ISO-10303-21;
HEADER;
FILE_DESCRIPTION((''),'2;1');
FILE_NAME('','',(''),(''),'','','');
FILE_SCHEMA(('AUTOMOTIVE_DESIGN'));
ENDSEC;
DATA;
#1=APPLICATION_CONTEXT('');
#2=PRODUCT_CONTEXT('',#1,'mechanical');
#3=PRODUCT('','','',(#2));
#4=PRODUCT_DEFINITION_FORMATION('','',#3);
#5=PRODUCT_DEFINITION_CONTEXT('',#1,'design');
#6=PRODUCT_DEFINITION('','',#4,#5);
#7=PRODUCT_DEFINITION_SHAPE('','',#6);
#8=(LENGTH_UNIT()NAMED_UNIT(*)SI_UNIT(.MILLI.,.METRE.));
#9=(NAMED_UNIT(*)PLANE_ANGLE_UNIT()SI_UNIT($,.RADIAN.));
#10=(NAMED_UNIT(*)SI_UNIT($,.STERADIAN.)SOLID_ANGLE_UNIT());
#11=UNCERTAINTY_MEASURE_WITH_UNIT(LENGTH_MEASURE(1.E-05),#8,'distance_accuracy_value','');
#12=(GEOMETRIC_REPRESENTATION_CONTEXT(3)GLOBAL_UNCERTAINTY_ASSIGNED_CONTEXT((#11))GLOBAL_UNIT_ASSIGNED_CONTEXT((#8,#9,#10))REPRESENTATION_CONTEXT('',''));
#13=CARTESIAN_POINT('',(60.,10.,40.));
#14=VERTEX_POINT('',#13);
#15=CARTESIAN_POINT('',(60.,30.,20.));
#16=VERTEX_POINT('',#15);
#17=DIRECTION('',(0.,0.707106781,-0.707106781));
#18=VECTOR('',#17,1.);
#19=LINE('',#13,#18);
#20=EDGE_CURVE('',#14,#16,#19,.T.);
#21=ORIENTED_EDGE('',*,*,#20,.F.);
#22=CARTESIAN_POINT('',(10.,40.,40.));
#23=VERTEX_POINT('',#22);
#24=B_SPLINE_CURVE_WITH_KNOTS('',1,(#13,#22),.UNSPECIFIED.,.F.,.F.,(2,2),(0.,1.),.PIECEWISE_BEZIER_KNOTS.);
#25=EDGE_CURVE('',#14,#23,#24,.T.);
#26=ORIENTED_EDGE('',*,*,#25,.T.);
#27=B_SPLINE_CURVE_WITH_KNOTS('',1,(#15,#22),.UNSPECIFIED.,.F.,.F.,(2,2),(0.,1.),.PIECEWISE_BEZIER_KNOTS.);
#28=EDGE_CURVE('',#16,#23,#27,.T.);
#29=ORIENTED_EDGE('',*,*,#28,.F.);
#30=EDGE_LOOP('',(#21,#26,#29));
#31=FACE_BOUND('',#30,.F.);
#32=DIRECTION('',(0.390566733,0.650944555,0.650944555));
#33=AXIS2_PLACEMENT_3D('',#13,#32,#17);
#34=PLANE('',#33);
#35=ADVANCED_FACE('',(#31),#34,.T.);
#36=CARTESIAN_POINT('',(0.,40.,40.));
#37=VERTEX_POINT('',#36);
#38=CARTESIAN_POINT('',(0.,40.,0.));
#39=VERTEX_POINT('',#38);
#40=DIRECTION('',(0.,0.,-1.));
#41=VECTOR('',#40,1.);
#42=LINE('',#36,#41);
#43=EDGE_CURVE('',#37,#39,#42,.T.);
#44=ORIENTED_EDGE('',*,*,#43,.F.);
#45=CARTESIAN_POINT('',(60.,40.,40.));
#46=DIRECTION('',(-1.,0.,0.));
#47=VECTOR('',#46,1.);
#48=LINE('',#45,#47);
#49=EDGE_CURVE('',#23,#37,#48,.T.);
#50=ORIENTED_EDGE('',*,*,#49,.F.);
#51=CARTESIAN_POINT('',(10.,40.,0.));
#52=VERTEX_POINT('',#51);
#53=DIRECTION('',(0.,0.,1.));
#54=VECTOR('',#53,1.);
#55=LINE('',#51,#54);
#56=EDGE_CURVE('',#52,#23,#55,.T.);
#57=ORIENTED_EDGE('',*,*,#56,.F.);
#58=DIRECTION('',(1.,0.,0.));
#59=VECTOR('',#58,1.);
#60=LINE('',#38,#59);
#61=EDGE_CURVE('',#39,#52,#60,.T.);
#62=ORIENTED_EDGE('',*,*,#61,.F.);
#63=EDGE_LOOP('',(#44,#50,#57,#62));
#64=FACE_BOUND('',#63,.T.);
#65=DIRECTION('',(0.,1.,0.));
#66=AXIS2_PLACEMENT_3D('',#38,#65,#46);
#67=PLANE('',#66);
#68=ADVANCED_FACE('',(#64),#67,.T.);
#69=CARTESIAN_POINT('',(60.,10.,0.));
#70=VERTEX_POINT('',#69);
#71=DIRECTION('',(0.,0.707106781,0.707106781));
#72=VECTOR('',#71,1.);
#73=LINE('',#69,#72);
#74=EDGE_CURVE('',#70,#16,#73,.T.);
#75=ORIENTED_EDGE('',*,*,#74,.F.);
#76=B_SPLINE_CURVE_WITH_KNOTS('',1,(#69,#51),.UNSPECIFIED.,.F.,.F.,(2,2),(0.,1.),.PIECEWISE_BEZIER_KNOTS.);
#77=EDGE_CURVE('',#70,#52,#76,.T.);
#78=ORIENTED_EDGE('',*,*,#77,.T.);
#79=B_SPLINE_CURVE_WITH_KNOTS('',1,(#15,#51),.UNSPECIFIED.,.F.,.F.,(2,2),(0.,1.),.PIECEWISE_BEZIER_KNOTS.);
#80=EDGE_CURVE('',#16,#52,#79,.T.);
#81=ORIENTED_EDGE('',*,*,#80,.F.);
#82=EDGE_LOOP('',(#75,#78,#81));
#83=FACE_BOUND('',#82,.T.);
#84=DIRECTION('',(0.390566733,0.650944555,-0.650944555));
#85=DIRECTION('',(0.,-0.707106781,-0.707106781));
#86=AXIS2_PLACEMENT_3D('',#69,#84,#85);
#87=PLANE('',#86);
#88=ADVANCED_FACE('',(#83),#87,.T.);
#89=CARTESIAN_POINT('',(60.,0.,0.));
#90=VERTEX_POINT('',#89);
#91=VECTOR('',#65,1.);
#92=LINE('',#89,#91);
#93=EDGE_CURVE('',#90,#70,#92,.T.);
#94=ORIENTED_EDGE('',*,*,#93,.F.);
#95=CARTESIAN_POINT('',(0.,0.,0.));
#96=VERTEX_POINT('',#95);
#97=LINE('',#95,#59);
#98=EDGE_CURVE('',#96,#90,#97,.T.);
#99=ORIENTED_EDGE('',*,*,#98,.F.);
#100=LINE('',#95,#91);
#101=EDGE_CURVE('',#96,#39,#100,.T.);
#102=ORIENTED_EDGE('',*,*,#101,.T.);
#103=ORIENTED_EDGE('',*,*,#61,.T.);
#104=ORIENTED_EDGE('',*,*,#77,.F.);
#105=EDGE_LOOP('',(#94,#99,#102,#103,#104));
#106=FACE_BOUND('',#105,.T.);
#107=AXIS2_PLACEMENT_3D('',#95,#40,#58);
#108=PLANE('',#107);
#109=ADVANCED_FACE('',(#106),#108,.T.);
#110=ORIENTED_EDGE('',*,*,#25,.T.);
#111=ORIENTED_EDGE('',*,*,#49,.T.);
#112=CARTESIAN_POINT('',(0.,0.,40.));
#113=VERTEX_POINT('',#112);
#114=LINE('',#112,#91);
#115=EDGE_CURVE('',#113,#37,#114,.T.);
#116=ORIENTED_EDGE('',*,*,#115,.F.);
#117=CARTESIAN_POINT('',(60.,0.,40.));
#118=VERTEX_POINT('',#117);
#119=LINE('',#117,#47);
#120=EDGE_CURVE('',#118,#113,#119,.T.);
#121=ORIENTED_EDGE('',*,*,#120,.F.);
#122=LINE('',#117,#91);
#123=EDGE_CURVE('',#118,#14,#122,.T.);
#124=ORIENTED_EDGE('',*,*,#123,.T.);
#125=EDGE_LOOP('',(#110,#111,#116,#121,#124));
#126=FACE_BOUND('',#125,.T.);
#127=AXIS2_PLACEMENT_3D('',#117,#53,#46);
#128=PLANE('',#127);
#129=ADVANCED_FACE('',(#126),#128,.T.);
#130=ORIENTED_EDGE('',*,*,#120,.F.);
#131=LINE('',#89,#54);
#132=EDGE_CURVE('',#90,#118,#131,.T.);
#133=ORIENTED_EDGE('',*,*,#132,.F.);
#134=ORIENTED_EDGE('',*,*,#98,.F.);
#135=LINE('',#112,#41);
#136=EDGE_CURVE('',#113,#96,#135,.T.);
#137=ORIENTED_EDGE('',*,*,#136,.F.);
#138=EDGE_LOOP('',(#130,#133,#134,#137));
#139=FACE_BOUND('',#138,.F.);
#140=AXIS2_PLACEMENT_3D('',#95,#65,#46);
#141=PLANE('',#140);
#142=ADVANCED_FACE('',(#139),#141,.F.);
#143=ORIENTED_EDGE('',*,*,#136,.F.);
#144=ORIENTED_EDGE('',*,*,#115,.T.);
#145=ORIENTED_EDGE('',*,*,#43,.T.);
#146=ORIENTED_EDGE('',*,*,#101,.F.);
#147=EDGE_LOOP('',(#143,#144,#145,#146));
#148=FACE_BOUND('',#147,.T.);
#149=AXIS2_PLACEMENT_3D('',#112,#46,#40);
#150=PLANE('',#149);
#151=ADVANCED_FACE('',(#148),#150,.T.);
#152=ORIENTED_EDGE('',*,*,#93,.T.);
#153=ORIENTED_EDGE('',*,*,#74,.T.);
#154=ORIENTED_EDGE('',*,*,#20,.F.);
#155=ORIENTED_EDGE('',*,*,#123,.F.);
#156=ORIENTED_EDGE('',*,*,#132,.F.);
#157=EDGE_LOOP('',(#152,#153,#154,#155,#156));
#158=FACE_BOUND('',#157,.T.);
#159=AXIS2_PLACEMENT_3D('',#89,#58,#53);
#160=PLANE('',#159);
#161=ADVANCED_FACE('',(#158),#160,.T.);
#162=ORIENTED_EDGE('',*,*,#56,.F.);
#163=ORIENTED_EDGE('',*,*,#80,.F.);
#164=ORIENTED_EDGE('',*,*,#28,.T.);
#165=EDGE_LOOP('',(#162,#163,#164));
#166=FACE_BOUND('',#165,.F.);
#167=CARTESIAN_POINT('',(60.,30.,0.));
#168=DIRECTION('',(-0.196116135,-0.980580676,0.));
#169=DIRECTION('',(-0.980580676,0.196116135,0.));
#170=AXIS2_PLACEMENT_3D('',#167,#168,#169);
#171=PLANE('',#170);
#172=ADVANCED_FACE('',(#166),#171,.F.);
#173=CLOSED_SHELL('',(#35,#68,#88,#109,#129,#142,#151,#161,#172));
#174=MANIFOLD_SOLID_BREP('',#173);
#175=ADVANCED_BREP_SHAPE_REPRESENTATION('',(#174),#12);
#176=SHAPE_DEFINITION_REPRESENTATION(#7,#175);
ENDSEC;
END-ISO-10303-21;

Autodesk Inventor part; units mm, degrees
ref_plane "YZ Plane" through (0, 0, 0) normal (1, 0, 0) x (0, 1, 0)
sketch "草圖1" plane through (0, 0, 0) normal (0, 1, 0) x (-1, 0, 0)
  line L0 (0, 0) -> (-60, 0)
  line L1 (-60, 0) -> (-60, 40)
  line L2 (-60, 40) -> (0, 40)
  line L3 (0, 40) -> (0, 0)
  dimension "d0" = 40
  dimension "d1" = 60
extrude "擠出1" add sketch "草圖1" along normal blind 40
sketch "草圖3" plane through (60, 0, 40) normal (1, 0, 0) x (0, 0, -1)
  line L0 (40, 40) -> (40, 0) projected
  line L1 (40, 0) -> (0, 0) construction
  line L2 (0, 0) -> (0, 40) construction
  line L3 (0, 40) -> (40, 40) construction
  line L4 (40, 40) -> (0, 40) construction
  line L5 (40, 0) -> (40, 40) projected
  line L6 (40, 10) -> (20, 30)
  line L7 (20, 30) -> (40, 40)
  dimension "d14" = 30
  dimension "d15" = 20
  dimension "d16" = 10
ref_plane "工作平面2" through (10, 0, 0) normal (-1, 0, 0) x (0, 0, 1)
sketch "草圖7" plane through (10, 0, 0) normal (-1, 0, 0) x (0, 0, 1)
  line L0 (0, 0) -> (0, 40) construction
  line L1 (0, 40) -> (40, 40) construction
  line L2 (40, 40) -> (40, 0) construction
  line L3 (40, 0) -> (0, 0) construction
loft "斷面混成2" cut profiles "草圖3" section 2 point at (10, 40, 0)
ref_plane "工作平面4" through (0, 0, 20) normal (0, 0, 1) x (1, 0, 0)
mirror "鏡射2" about plane through (0, 0, 20) normal (0, 0, 1) of "斷面混成2"
sketch "草圖18" plane through (60, 0, 0) normal (0, 0, -1) x (-1, 0, 0)
  line L0 (60, 40) -> (60, 0) projected
  line L1 (60, 0) -> (0, 0) projected
  line L2 (0, 0) -> (0, 10) projected
  line L3 (0, 10) -> (50, 40) projected
  line L4 (50, 40) -> (60, 40) projected
  line L5 (50, 40) -> (0, 40) projected
  line L6 (60, 40) -> (50, 40) projected
  line L7 (0, 30) -> (50, 40) projected
  line L8 (50, 40) -> (0, 30)
  line L9 (0, 30) -> (0, 40)
  line L10 (50, 40) -> (0, 40) projected
  line L11 (0, 40) -> (50, 40)
extrude "擠出2" cut sketch "草圖18" against normal blind 45 contours L7 L9 L5
properties part number "16" material "鋼、碳鋼"
